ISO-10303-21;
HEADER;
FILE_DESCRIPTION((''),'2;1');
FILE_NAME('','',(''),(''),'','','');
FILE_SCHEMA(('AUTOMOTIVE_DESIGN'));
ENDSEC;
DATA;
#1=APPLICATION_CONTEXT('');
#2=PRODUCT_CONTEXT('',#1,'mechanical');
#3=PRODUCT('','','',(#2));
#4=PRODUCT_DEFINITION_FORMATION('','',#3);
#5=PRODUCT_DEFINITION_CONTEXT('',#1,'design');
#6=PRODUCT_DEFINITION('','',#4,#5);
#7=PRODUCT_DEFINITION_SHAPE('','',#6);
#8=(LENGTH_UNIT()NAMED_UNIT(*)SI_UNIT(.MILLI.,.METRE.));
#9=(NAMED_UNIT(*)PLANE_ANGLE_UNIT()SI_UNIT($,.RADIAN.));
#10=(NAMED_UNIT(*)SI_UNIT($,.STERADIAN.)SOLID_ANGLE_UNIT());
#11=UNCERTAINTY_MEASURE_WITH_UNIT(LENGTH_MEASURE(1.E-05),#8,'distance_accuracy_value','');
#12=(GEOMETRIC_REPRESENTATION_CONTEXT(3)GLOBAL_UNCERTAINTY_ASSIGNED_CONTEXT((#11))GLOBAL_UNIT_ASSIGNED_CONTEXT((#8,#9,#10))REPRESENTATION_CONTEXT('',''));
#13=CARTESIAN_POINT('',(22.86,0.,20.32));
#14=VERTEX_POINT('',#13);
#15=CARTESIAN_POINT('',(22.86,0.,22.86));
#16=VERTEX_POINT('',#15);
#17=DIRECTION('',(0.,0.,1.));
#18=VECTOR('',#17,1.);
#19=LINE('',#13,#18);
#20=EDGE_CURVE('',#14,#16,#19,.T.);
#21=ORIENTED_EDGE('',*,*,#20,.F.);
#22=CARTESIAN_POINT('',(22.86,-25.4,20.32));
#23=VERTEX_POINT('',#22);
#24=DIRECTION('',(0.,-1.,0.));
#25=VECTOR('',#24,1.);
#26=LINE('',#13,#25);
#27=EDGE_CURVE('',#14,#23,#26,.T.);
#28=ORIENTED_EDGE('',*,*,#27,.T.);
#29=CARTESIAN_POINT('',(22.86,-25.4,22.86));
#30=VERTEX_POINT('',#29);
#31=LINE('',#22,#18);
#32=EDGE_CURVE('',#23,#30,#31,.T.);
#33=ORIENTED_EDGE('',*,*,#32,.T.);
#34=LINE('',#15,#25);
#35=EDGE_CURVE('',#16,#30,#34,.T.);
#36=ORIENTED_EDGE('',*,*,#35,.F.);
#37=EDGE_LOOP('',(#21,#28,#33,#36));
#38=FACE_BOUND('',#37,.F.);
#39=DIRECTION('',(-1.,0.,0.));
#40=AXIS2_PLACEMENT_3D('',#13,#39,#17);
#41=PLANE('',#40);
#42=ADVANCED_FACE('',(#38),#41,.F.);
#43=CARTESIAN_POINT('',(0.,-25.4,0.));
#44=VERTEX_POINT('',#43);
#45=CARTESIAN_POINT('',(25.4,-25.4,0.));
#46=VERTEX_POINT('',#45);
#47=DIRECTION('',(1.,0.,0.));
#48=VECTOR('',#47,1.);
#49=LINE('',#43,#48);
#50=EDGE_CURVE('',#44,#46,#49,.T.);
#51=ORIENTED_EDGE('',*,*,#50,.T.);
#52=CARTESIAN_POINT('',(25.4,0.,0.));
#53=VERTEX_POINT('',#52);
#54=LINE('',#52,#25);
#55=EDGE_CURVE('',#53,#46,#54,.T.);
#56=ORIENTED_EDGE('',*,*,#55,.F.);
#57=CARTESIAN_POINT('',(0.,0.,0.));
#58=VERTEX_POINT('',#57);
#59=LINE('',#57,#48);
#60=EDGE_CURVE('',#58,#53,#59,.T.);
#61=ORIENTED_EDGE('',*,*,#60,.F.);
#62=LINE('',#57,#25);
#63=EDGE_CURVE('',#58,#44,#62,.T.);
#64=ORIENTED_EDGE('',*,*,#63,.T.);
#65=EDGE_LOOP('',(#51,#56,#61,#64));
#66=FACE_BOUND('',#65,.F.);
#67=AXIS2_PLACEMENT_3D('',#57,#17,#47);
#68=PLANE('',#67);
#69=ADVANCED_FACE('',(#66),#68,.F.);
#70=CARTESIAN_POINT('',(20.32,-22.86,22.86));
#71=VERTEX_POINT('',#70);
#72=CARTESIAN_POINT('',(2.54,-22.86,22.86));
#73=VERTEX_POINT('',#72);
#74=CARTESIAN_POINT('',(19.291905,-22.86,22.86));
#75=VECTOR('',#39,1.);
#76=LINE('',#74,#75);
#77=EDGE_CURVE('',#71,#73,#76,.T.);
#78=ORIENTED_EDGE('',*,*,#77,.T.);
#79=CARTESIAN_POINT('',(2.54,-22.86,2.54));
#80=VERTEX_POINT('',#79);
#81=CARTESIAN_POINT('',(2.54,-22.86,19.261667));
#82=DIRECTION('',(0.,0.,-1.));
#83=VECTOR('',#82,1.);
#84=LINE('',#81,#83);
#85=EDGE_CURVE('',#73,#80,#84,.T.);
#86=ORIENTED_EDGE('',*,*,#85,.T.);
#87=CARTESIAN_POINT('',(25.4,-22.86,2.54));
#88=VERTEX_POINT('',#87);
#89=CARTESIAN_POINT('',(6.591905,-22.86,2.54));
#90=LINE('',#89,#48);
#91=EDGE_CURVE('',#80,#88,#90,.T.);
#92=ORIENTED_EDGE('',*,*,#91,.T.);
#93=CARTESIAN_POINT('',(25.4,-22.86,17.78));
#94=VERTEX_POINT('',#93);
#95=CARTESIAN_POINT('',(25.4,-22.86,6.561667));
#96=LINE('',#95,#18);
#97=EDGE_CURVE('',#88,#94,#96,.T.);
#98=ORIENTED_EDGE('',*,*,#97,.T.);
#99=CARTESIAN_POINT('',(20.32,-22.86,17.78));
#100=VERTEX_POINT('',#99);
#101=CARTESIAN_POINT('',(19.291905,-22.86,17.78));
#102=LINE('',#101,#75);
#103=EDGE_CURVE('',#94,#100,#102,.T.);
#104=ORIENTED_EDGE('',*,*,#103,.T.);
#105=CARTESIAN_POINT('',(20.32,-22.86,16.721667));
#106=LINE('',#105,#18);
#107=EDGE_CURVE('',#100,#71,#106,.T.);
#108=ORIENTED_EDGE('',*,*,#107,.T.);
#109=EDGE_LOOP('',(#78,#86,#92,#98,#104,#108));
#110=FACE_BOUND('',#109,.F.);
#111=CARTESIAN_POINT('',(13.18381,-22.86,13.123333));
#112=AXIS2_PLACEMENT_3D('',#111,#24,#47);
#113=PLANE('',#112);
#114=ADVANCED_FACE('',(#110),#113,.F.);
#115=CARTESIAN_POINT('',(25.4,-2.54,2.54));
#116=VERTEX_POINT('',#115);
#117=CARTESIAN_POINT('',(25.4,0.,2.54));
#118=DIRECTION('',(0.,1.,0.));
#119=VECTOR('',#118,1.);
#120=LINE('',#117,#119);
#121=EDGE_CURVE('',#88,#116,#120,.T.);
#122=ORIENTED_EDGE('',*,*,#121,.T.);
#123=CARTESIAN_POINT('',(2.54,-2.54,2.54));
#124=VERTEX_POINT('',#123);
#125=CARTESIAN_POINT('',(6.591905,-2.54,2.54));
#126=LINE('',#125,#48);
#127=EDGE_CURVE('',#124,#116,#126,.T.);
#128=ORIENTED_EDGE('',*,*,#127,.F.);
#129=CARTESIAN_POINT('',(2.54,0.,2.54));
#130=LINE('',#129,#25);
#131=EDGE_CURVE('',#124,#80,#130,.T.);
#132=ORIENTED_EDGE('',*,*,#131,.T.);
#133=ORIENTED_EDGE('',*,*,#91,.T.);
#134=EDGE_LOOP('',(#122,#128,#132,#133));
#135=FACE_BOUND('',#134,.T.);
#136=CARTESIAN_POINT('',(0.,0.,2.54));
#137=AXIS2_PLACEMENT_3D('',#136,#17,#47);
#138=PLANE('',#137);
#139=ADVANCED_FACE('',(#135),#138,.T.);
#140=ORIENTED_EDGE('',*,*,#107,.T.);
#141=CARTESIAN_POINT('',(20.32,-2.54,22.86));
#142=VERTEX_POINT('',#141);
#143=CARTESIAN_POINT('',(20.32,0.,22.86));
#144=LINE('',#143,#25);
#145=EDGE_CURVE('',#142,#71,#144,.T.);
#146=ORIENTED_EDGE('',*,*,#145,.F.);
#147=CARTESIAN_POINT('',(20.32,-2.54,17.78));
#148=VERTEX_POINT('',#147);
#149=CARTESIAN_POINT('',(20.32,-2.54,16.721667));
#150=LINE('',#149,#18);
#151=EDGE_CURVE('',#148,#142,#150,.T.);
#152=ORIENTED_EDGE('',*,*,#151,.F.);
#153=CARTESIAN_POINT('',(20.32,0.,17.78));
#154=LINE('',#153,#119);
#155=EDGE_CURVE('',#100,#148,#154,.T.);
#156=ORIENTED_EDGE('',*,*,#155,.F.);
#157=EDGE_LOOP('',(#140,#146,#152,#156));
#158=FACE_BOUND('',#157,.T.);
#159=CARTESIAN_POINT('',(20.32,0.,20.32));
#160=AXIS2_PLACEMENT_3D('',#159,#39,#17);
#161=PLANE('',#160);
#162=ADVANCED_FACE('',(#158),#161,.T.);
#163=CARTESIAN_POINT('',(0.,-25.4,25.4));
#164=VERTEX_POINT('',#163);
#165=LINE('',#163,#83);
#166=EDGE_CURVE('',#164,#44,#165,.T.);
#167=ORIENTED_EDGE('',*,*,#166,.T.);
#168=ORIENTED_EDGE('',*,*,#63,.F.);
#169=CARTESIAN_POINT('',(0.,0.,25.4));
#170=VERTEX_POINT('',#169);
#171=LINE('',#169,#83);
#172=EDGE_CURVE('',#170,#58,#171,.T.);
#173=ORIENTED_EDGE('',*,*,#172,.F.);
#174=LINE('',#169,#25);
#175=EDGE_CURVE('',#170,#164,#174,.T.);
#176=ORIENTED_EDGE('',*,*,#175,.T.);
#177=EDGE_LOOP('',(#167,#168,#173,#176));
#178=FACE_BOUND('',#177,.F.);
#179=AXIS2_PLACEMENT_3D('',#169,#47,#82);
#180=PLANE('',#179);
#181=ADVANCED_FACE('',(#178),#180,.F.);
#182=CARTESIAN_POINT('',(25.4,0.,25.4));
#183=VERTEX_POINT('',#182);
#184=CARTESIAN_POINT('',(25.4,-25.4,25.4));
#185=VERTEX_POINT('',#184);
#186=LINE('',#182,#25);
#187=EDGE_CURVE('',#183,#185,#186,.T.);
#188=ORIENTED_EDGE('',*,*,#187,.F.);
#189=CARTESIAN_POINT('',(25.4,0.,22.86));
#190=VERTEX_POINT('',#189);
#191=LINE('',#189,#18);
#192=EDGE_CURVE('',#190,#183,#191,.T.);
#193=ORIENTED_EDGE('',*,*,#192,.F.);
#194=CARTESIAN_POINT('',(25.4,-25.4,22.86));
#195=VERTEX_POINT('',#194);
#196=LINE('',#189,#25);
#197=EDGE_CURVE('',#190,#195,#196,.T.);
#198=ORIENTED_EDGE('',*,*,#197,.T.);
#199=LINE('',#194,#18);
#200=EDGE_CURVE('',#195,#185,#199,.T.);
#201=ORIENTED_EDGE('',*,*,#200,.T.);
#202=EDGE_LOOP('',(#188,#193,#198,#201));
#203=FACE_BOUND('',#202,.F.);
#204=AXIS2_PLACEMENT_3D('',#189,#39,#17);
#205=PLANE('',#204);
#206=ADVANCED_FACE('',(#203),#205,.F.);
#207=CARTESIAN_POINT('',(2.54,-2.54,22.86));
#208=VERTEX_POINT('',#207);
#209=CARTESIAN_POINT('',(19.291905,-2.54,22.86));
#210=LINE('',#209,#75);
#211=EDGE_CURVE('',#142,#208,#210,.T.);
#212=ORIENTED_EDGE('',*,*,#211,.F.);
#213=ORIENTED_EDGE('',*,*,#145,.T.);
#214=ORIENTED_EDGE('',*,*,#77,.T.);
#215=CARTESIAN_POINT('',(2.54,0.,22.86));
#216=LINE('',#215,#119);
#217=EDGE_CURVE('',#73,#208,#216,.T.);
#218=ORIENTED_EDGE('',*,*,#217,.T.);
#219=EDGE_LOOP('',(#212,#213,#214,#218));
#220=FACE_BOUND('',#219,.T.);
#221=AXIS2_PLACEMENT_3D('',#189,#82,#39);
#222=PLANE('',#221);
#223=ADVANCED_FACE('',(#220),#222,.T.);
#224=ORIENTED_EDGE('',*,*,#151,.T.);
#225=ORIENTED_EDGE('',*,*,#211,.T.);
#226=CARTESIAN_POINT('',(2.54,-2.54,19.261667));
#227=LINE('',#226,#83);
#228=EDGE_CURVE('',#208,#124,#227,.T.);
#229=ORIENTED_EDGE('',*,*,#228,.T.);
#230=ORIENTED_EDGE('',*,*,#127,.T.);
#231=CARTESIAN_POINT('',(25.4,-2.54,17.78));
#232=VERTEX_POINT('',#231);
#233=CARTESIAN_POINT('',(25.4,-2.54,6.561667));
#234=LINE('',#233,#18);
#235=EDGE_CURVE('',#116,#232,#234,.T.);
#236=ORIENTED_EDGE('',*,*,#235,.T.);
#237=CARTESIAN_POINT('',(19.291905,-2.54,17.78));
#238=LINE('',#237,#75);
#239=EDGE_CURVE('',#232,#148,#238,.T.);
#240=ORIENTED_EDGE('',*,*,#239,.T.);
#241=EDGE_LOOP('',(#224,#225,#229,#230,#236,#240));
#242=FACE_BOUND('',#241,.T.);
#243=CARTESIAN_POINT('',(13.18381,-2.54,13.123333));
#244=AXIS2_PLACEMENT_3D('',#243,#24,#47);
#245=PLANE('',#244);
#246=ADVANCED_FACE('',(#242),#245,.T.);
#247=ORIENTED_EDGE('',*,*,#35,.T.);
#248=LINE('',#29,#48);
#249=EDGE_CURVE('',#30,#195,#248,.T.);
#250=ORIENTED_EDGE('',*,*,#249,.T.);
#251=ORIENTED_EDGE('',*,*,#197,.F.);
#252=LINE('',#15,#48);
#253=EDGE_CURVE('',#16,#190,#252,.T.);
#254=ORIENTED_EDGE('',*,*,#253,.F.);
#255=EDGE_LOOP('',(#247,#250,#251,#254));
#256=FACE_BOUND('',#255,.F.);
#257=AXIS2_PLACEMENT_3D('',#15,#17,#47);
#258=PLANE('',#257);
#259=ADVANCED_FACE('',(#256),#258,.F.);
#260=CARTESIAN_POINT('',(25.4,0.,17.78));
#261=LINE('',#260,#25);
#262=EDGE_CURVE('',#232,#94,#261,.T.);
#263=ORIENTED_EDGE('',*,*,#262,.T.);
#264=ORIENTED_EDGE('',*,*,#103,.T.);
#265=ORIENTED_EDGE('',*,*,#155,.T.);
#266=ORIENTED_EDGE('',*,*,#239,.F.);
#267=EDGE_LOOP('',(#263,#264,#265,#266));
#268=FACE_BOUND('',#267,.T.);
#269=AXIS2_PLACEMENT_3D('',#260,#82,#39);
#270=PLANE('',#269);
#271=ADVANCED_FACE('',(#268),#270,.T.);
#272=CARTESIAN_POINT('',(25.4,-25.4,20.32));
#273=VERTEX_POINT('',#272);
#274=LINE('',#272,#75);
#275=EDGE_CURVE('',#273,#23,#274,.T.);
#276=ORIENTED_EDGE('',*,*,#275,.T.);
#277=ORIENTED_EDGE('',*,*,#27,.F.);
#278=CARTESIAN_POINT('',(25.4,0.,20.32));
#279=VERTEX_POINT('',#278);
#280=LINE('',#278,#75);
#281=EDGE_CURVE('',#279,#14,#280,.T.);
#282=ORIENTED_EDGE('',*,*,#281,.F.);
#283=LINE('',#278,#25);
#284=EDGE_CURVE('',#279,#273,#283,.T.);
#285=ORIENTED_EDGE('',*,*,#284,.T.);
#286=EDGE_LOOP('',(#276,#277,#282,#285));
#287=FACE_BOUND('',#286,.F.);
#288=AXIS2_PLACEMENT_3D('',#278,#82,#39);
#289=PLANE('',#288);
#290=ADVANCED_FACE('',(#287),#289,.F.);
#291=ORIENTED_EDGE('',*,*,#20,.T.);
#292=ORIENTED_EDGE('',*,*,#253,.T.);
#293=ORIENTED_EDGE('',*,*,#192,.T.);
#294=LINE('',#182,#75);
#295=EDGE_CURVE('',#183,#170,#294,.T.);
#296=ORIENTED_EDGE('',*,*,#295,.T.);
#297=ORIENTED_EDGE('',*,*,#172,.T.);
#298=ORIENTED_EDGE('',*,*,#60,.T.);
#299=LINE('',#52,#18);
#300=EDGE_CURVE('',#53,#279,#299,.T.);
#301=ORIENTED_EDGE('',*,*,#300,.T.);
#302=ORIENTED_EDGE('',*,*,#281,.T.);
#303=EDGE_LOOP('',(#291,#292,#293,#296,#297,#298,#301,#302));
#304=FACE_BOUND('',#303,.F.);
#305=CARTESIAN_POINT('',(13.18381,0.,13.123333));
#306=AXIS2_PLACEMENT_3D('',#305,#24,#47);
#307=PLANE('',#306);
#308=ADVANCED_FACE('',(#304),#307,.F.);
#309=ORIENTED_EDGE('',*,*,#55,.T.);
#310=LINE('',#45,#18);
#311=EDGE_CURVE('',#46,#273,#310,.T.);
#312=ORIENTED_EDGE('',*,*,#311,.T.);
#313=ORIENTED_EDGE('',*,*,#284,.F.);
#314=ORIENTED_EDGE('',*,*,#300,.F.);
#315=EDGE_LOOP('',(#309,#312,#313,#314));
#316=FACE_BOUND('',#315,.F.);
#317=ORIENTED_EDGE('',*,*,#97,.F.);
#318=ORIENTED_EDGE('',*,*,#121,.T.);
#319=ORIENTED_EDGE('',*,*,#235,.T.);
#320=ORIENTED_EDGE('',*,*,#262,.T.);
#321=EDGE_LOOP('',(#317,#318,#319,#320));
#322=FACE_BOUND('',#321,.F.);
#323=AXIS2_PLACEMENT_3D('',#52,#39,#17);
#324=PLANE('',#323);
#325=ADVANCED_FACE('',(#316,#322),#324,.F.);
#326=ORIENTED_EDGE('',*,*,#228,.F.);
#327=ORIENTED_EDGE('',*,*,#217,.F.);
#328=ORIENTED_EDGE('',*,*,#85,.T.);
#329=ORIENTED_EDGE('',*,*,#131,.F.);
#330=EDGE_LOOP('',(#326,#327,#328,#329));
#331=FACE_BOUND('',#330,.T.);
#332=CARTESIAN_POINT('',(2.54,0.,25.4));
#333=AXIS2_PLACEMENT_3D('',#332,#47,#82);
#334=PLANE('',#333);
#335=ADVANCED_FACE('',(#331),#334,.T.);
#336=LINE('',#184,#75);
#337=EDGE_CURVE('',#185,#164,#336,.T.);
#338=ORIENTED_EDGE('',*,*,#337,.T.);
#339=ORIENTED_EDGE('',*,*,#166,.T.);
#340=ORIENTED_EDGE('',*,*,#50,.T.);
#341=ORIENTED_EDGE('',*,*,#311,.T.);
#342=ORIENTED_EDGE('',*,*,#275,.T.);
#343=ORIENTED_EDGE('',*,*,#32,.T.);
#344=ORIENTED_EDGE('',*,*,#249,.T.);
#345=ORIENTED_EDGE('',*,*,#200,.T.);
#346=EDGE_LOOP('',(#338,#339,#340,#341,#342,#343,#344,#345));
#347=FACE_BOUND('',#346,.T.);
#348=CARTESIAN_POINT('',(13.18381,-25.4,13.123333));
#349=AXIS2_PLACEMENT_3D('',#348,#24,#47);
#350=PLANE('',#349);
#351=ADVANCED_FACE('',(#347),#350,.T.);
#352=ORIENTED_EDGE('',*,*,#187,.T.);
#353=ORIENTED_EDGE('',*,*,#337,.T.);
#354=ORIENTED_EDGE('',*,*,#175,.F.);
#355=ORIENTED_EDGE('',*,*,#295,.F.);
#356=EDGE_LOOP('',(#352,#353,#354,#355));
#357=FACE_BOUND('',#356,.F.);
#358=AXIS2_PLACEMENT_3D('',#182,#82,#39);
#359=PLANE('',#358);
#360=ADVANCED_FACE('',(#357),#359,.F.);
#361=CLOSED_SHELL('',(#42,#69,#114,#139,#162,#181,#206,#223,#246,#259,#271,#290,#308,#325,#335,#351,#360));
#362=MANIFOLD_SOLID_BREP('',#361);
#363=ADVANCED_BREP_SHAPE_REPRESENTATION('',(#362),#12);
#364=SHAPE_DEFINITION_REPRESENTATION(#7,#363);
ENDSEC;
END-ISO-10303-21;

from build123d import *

# Parameters (mm, degrees)
F1_DEPTH = 25.4
F2_T     = -2.54


with BuildPart() as f1:
    # F0 (on Front) → F1 (new body)
    with BuildSketch(Plane.XZ):
        Polygon((0, 25.4), (0, 0), (25.4, 0), (25.4, 20.32), (22.86, 20.32), (22.86, 22.86), (25.4, 22.86), (25.4, 25.4), align=None)
    extrude(amount=F1_DEPTH)

    # F2
    f2_openings = [f1.faces().sort_by_distance(p)[0] for p in [
        (25.4, -12.7, 10.16),
    ]]
    offset(amount=F2_T, openings=f2_openings, kind=Kind.INTERSECTION)


solid = f1.part
